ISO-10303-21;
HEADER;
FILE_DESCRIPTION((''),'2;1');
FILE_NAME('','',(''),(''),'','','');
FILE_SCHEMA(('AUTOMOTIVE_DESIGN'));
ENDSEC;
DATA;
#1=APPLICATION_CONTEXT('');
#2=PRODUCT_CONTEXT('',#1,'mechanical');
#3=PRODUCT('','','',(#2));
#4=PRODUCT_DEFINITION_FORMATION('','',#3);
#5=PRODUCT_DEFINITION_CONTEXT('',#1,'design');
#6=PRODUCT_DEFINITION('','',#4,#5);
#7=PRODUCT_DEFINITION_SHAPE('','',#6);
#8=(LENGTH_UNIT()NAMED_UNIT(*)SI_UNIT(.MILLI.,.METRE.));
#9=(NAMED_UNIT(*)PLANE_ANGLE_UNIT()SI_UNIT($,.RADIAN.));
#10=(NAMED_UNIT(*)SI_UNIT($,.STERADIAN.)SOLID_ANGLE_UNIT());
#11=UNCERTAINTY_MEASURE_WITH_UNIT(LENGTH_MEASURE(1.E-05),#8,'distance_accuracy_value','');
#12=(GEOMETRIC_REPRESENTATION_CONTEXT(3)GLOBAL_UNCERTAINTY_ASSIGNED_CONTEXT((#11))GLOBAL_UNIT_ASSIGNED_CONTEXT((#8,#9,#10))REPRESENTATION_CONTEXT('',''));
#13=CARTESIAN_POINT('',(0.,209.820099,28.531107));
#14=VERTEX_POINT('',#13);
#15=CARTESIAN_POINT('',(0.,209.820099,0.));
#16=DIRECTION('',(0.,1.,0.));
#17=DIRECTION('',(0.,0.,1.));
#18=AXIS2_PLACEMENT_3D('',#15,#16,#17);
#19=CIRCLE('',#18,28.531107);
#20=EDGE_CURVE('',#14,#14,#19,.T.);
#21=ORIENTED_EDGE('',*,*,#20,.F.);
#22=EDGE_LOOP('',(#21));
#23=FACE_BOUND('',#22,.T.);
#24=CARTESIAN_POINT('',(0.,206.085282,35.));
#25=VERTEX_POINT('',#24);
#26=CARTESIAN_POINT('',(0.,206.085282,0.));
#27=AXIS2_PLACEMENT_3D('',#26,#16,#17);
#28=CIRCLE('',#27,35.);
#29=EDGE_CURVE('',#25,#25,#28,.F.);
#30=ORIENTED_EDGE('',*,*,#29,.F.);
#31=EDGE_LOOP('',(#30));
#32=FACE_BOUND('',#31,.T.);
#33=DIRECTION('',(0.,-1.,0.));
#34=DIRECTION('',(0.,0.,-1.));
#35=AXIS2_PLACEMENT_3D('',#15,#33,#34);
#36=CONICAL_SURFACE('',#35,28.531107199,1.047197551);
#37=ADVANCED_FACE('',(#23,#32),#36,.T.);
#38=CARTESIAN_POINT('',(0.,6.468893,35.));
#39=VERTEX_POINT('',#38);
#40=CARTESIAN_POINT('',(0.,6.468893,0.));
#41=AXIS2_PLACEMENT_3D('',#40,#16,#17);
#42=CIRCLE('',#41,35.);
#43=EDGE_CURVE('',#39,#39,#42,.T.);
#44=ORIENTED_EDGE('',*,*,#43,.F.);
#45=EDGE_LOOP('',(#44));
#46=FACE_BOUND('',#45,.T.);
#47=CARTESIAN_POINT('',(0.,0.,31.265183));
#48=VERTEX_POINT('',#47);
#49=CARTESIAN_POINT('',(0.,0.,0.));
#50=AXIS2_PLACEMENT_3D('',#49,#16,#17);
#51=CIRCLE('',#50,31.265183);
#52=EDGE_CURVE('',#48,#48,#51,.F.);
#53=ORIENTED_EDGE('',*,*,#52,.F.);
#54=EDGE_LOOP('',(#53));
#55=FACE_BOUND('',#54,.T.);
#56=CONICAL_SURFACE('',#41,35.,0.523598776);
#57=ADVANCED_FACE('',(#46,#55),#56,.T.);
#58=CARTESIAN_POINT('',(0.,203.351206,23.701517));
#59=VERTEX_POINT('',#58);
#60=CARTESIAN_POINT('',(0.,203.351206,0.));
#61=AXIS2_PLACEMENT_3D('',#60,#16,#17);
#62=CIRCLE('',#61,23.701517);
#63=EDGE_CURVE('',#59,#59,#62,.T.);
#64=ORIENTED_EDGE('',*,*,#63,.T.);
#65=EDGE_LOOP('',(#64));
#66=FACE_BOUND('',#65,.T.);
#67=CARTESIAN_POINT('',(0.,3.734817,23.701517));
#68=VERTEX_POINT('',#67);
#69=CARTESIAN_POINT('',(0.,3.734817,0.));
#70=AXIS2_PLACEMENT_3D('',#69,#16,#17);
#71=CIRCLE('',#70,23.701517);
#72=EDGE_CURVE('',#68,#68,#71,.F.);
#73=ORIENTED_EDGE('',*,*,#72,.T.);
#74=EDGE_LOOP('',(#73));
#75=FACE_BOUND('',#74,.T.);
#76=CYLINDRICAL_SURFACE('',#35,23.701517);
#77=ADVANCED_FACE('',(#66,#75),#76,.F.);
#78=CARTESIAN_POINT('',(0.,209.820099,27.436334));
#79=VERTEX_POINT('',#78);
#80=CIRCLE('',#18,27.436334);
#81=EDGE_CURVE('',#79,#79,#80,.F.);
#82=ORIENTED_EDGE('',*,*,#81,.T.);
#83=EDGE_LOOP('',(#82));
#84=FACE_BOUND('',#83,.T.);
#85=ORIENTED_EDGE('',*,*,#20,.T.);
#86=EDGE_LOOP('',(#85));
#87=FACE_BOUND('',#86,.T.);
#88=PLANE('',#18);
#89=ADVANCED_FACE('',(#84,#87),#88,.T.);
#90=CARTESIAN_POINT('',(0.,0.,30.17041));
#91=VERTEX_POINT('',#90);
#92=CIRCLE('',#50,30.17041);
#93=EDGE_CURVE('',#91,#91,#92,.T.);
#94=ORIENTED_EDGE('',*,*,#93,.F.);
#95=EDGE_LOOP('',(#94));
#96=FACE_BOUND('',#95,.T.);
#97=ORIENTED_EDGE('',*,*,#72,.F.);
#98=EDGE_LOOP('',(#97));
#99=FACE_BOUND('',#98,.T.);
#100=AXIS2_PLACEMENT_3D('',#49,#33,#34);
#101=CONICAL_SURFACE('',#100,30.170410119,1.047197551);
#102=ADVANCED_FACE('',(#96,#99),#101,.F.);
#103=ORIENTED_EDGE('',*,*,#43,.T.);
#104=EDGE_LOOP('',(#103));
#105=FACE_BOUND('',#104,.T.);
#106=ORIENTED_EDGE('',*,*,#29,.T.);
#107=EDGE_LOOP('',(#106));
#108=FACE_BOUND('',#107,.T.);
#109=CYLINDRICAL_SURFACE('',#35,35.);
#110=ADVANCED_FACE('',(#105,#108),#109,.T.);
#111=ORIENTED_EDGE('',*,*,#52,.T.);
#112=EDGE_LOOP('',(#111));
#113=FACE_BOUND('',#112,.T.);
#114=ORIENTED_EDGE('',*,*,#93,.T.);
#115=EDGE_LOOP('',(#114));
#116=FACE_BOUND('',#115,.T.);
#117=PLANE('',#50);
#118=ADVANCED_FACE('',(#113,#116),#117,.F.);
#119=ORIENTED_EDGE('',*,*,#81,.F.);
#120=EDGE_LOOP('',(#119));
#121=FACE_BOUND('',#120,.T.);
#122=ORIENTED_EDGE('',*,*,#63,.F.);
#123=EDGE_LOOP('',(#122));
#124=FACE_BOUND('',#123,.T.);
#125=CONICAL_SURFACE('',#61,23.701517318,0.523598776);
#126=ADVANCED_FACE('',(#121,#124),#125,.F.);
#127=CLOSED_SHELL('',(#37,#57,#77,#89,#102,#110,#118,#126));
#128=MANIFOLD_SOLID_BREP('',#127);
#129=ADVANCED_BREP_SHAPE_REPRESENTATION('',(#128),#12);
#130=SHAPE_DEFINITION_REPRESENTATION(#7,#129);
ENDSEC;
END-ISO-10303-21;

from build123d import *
from OCP.BRepFilletAPI import BRepFilletAPI_MakeChamfer

# Parameters (mm, degrees)
SKETCH1_R           = 35
BOSS_EXTRUDE1_DEPTH = 209.820098681
SKETCH2_R           = 23.701517318
CUT_EXTRUDE1_DEPTH  = 216.579390969
CHAMFER1_SIZE       = 3.734817
CHAMFER1_SIZE2      = 6.468892801


with BuildPart() as part:
    # Sketch1 → Boss-Extrude1 (new body)
    with BuildSketch(Plane(origin=(0, 0, 0), x_dir=(1, 0, 0), z_dir=(0, 1, 0))):
        Circle(SKETCH1_R)
    extrude(amount=BOSS_EXTRUDE1_DEPTH)

    # Sketch2 → Cut-Extrude1 (cut, through all)
    with BuildSketch(Plane(origin=(0, 0, 0), x_dir=(1, 0, 0), z_dir=(0, 1, 0))):
        Circle(SKETCH2_R)
    extrude(amount=CUT_EXTRUDE1_DEPTH, mode=Mode.SUBTRACT)

    # Chamfer1: one chamfer whose edges measure the first distance from different faces: ONE call of the kernel's chamfer builder (chamfer() names one face for all edges)
    chamfer1_edges_1 = [part.edges().sort_by_distance(p)[0] for p in [
        (-23.701517318, 209.820098681, 0),
    ]]
    chamfer1_side_1 = [part.faces().sort_by_distance(p)[0] for p in [
        (-34.010050506, 209.820098681, 0),
    ]]
    chamfer1_edges_2 = [part.edges().sort_by_distance(p)[0] for p in [
        (-23.701517318, 0, 0),
    ]]
    chamfer1_side_2 = [part.faces().sort_by_distance(p)[0] for p in [
        (-23.701517318, 104.91004934, 0),
    ]]
    chamfer1_edges_3 = [part.edges().sort_by_distance(p)[0] for p in [
        (-35, 0, 0),
    ]]
    chamfer1_side_3 = [part.faces().sort_by_distance(p)[0] for p in [
        (-34.010050506, 0, 0),
    ]]
    chamfer1_edges_4 = [part.edges().sort_by_distance(p)[0] for p in [
        (-35, 209.820098681, 0),
    ]]
    chamfer1_side_4 = [part.faces().sort_by_distance(p)[0] for p in [
        (-35, 104.91004934, 0),
    ]]
    chamfer1 = BRepFilletAPI_MakeChamfer(part.part.solid().wrapped)
    for e in chamfer1_edges_1:
        chamfer1.Add(CHAMFER1_SIZE, CHAMFER1_SIZE2, e.wrapped, chamfer1_side_1[0].wrapped)  # the first distance lies on this face
    for e in chamfer1_edges_2:
        chamfer1.Add(CHAMFER1_SIZE, CHAMFER1_SIZE2, e.wrapped, chamfer1_side_2[0].wrapped)  # the first distance lies on this face
    for e in chamfer1_edges_3:
        chamfer1.Add(CHAMFER1_SIZE, CHAMFER1_SIZE2, e.wrapped, chamfer1_side_3[0].wrapped)  # the first distance lies on this face
    for e in chamfer1_edges_4:
        chamfer1.Add(CHAMFER1_SIZE, CHAMFER1_SIZE2, e.wrapped, chamfer1_side_4[0].wrapped)  # the first distance lies on this face
    add(Compound.cast(chamfer1.Shape()), mode=Mode.REPLACE)


solid = part.part
